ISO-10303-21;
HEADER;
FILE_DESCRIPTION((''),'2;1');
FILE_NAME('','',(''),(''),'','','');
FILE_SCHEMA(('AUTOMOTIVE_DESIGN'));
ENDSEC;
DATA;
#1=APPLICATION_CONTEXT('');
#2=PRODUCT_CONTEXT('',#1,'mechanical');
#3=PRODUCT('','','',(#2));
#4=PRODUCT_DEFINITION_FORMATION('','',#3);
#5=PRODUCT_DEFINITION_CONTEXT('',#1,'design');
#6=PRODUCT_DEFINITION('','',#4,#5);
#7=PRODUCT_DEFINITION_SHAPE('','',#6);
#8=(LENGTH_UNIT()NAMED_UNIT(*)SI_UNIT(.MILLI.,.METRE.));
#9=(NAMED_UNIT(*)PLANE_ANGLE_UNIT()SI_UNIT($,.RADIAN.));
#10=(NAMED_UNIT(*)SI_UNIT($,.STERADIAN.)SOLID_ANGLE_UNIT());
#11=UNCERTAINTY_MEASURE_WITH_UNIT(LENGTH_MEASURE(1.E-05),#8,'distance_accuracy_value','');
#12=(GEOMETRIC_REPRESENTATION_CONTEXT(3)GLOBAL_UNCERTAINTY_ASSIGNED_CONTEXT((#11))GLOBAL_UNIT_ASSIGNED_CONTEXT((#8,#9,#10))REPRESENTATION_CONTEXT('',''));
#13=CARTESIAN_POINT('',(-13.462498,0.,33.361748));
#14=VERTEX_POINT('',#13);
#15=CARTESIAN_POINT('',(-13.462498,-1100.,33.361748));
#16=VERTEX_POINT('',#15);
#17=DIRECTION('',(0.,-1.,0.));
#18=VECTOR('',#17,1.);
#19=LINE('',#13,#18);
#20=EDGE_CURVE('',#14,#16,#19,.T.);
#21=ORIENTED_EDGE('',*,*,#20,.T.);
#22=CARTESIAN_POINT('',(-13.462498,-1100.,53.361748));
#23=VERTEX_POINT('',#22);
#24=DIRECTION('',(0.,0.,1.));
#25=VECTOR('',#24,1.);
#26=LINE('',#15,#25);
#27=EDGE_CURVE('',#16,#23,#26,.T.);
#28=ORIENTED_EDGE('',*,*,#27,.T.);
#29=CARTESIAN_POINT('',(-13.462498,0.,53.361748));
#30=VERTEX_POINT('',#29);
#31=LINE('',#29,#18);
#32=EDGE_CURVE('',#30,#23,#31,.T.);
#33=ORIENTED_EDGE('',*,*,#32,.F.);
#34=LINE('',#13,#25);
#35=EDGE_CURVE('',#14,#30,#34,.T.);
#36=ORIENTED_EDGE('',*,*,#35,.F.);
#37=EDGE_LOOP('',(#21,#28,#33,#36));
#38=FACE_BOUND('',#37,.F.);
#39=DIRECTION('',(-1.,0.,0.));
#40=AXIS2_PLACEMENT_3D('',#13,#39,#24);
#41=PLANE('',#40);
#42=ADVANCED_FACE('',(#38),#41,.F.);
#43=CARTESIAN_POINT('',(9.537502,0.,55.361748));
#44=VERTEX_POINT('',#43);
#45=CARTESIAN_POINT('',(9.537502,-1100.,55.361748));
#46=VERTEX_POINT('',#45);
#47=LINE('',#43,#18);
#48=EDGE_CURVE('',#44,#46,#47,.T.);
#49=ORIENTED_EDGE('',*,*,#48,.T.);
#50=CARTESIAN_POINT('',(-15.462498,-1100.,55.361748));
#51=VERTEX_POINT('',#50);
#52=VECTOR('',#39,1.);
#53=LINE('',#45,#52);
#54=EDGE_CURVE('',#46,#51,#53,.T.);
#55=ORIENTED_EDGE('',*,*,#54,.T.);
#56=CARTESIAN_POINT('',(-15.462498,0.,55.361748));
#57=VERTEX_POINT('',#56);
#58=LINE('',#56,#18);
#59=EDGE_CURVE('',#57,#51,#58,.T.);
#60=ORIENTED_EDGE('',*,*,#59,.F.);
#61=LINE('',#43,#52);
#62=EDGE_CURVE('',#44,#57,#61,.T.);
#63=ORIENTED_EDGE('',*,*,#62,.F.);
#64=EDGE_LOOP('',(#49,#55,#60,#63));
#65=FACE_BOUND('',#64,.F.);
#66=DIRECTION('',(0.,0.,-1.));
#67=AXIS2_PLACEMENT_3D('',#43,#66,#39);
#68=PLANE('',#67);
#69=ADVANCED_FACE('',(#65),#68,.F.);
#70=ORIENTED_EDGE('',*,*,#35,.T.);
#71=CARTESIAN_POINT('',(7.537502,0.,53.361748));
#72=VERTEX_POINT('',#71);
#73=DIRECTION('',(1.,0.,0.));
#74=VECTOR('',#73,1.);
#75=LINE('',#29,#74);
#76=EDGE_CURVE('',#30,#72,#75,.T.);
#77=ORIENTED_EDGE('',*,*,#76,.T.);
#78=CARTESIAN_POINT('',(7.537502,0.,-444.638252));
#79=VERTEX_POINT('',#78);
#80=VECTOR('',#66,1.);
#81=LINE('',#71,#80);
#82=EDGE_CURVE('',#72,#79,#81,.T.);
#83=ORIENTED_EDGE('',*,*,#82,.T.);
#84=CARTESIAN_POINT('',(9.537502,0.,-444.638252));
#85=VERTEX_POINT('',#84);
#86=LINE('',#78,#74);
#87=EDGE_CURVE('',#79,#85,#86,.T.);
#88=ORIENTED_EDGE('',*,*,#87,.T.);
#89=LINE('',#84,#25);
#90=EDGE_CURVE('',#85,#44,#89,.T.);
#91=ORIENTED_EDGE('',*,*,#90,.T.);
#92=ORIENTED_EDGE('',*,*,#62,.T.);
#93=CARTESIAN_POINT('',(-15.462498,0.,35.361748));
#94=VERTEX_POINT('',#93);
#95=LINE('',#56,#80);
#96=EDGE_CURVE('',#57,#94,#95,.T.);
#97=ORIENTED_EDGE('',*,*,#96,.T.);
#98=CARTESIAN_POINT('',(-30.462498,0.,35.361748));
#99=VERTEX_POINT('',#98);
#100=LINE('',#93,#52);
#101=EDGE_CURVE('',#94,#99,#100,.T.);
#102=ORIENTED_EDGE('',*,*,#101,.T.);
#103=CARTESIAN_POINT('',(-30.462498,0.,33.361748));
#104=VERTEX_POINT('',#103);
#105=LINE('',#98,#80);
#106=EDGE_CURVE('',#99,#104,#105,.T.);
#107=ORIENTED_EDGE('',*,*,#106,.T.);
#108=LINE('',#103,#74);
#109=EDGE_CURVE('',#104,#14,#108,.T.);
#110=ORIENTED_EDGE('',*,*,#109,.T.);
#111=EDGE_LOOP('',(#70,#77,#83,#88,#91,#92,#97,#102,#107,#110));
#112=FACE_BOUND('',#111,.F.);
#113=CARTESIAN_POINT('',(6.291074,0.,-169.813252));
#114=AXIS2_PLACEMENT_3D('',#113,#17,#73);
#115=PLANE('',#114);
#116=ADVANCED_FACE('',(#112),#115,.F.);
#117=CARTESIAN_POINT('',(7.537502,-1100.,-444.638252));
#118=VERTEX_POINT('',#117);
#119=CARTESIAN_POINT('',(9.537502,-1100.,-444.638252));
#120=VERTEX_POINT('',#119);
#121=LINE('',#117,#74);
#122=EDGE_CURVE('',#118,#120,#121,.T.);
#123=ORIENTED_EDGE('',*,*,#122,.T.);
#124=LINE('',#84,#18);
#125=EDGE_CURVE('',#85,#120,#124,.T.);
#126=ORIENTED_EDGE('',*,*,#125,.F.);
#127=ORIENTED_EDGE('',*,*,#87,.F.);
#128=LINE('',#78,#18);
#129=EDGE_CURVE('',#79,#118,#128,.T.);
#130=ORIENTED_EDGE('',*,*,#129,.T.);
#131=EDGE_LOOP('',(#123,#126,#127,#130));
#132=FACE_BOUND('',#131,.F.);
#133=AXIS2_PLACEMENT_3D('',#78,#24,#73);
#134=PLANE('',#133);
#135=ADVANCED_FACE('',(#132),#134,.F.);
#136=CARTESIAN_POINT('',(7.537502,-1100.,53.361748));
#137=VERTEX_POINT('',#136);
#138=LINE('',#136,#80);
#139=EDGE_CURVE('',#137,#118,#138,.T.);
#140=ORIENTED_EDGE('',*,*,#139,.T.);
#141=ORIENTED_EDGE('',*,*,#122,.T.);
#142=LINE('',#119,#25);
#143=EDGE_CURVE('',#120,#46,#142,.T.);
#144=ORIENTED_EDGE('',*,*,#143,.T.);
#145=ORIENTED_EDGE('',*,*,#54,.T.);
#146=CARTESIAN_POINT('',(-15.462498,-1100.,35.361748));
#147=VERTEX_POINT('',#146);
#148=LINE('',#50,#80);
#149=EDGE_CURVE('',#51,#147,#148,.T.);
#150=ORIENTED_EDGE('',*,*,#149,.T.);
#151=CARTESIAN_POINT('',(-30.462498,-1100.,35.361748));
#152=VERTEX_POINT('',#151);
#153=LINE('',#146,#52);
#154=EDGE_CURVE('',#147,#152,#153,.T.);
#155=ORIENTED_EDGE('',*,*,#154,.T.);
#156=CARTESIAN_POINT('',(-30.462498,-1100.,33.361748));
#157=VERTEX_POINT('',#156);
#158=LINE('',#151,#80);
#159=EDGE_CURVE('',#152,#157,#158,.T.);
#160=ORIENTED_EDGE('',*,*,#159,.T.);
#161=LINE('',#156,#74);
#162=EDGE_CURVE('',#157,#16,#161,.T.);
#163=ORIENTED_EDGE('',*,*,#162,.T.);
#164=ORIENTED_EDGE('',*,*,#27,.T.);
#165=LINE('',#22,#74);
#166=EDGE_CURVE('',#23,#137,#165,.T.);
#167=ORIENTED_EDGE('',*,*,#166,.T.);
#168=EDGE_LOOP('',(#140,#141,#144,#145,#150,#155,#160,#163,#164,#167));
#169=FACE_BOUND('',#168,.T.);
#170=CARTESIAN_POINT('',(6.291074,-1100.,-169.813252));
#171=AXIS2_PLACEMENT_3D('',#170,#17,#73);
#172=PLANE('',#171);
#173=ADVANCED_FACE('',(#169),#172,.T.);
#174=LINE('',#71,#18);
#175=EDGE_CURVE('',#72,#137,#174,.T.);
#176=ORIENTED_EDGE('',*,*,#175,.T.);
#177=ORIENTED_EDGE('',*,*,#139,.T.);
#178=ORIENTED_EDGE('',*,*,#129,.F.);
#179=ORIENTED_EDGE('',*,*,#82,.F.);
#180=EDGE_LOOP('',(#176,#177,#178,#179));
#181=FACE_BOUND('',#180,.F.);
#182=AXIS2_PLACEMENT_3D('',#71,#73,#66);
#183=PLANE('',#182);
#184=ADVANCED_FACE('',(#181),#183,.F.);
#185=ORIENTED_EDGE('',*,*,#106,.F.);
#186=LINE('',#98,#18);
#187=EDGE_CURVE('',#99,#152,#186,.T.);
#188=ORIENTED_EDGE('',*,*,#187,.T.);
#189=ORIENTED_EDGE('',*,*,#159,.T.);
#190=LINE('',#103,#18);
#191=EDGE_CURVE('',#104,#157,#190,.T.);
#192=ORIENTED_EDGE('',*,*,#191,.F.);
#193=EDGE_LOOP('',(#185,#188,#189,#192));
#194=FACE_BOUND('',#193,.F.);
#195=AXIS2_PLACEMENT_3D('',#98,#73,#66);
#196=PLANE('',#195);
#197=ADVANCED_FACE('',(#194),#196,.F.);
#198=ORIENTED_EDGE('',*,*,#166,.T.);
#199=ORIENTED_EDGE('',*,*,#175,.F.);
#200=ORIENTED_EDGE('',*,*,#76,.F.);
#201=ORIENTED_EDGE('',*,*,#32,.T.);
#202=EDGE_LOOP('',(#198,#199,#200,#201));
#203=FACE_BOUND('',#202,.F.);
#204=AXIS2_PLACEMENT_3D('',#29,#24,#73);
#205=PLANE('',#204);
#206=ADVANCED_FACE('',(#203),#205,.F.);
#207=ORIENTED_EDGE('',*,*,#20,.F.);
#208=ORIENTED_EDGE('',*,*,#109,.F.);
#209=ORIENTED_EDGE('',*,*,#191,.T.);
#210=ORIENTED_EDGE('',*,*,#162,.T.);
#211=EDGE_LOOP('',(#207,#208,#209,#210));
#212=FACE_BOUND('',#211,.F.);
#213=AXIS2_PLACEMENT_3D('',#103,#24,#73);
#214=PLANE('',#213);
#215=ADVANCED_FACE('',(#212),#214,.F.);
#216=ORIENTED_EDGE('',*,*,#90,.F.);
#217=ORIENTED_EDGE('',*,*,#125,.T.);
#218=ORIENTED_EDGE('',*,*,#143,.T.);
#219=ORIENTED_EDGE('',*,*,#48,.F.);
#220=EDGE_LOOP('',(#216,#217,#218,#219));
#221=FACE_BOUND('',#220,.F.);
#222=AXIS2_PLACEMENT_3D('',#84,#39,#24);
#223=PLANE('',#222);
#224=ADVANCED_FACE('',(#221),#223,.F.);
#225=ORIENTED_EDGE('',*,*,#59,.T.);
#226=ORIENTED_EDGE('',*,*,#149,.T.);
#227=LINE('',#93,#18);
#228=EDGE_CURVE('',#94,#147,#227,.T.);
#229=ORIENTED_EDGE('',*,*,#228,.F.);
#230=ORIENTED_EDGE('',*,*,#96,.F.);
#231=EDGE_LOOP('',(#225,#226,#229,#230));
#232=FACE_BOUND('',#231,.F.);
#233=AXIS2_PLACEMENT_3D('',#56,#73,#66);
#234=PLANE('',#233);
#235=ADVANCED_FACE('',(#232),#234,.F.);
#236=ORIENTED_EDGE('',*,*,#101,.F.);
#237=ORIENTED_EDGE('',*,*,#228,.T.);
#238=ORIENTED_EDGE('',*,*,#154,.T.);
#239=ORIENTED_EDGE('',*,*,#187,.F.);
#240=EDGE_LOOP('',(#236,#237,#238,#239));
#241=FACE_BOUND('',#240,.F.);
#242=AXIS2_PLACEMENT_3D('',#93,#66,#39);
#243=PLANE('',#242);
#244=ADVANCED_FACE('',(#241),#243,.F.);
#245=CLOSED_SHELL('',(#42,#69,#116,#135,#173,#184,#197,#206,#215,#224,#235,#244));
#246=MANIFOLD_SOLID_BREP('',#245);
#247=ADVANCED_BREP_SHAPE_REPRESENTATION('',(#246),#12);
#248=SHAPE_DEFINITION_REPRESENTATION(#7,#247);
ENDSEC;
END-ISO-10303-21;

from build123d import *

# Parameters (mm, degrees)
F1_DEPTH = 1100


# Not quite as in the source:
# - a feature names something its author has since deleted; it is built from what else it names


with BuildPart() as f1:
    # F0 (on Front) → F1 (new body)
    with BuildSketch(Plane.XZ):
        Polygon((-15.4624978453, 35.3617481887), (-30.4624978453, 35.3617481887), (-30.4624978453, 33.3617481887), (-13.4624978453, 33.3617481887), (-13.4624978453, 53.3617481887), (7.5375021547, 53.3617481887), (7.5375021547, -444.6382518113), (9.5375021547, -444.6382518113), (9.5375021547, 55.3617481887), (-15.4624978453, 55.3617481887), align=None)
    extrude(amount=F1_DEPTH)


solid = f1.part
